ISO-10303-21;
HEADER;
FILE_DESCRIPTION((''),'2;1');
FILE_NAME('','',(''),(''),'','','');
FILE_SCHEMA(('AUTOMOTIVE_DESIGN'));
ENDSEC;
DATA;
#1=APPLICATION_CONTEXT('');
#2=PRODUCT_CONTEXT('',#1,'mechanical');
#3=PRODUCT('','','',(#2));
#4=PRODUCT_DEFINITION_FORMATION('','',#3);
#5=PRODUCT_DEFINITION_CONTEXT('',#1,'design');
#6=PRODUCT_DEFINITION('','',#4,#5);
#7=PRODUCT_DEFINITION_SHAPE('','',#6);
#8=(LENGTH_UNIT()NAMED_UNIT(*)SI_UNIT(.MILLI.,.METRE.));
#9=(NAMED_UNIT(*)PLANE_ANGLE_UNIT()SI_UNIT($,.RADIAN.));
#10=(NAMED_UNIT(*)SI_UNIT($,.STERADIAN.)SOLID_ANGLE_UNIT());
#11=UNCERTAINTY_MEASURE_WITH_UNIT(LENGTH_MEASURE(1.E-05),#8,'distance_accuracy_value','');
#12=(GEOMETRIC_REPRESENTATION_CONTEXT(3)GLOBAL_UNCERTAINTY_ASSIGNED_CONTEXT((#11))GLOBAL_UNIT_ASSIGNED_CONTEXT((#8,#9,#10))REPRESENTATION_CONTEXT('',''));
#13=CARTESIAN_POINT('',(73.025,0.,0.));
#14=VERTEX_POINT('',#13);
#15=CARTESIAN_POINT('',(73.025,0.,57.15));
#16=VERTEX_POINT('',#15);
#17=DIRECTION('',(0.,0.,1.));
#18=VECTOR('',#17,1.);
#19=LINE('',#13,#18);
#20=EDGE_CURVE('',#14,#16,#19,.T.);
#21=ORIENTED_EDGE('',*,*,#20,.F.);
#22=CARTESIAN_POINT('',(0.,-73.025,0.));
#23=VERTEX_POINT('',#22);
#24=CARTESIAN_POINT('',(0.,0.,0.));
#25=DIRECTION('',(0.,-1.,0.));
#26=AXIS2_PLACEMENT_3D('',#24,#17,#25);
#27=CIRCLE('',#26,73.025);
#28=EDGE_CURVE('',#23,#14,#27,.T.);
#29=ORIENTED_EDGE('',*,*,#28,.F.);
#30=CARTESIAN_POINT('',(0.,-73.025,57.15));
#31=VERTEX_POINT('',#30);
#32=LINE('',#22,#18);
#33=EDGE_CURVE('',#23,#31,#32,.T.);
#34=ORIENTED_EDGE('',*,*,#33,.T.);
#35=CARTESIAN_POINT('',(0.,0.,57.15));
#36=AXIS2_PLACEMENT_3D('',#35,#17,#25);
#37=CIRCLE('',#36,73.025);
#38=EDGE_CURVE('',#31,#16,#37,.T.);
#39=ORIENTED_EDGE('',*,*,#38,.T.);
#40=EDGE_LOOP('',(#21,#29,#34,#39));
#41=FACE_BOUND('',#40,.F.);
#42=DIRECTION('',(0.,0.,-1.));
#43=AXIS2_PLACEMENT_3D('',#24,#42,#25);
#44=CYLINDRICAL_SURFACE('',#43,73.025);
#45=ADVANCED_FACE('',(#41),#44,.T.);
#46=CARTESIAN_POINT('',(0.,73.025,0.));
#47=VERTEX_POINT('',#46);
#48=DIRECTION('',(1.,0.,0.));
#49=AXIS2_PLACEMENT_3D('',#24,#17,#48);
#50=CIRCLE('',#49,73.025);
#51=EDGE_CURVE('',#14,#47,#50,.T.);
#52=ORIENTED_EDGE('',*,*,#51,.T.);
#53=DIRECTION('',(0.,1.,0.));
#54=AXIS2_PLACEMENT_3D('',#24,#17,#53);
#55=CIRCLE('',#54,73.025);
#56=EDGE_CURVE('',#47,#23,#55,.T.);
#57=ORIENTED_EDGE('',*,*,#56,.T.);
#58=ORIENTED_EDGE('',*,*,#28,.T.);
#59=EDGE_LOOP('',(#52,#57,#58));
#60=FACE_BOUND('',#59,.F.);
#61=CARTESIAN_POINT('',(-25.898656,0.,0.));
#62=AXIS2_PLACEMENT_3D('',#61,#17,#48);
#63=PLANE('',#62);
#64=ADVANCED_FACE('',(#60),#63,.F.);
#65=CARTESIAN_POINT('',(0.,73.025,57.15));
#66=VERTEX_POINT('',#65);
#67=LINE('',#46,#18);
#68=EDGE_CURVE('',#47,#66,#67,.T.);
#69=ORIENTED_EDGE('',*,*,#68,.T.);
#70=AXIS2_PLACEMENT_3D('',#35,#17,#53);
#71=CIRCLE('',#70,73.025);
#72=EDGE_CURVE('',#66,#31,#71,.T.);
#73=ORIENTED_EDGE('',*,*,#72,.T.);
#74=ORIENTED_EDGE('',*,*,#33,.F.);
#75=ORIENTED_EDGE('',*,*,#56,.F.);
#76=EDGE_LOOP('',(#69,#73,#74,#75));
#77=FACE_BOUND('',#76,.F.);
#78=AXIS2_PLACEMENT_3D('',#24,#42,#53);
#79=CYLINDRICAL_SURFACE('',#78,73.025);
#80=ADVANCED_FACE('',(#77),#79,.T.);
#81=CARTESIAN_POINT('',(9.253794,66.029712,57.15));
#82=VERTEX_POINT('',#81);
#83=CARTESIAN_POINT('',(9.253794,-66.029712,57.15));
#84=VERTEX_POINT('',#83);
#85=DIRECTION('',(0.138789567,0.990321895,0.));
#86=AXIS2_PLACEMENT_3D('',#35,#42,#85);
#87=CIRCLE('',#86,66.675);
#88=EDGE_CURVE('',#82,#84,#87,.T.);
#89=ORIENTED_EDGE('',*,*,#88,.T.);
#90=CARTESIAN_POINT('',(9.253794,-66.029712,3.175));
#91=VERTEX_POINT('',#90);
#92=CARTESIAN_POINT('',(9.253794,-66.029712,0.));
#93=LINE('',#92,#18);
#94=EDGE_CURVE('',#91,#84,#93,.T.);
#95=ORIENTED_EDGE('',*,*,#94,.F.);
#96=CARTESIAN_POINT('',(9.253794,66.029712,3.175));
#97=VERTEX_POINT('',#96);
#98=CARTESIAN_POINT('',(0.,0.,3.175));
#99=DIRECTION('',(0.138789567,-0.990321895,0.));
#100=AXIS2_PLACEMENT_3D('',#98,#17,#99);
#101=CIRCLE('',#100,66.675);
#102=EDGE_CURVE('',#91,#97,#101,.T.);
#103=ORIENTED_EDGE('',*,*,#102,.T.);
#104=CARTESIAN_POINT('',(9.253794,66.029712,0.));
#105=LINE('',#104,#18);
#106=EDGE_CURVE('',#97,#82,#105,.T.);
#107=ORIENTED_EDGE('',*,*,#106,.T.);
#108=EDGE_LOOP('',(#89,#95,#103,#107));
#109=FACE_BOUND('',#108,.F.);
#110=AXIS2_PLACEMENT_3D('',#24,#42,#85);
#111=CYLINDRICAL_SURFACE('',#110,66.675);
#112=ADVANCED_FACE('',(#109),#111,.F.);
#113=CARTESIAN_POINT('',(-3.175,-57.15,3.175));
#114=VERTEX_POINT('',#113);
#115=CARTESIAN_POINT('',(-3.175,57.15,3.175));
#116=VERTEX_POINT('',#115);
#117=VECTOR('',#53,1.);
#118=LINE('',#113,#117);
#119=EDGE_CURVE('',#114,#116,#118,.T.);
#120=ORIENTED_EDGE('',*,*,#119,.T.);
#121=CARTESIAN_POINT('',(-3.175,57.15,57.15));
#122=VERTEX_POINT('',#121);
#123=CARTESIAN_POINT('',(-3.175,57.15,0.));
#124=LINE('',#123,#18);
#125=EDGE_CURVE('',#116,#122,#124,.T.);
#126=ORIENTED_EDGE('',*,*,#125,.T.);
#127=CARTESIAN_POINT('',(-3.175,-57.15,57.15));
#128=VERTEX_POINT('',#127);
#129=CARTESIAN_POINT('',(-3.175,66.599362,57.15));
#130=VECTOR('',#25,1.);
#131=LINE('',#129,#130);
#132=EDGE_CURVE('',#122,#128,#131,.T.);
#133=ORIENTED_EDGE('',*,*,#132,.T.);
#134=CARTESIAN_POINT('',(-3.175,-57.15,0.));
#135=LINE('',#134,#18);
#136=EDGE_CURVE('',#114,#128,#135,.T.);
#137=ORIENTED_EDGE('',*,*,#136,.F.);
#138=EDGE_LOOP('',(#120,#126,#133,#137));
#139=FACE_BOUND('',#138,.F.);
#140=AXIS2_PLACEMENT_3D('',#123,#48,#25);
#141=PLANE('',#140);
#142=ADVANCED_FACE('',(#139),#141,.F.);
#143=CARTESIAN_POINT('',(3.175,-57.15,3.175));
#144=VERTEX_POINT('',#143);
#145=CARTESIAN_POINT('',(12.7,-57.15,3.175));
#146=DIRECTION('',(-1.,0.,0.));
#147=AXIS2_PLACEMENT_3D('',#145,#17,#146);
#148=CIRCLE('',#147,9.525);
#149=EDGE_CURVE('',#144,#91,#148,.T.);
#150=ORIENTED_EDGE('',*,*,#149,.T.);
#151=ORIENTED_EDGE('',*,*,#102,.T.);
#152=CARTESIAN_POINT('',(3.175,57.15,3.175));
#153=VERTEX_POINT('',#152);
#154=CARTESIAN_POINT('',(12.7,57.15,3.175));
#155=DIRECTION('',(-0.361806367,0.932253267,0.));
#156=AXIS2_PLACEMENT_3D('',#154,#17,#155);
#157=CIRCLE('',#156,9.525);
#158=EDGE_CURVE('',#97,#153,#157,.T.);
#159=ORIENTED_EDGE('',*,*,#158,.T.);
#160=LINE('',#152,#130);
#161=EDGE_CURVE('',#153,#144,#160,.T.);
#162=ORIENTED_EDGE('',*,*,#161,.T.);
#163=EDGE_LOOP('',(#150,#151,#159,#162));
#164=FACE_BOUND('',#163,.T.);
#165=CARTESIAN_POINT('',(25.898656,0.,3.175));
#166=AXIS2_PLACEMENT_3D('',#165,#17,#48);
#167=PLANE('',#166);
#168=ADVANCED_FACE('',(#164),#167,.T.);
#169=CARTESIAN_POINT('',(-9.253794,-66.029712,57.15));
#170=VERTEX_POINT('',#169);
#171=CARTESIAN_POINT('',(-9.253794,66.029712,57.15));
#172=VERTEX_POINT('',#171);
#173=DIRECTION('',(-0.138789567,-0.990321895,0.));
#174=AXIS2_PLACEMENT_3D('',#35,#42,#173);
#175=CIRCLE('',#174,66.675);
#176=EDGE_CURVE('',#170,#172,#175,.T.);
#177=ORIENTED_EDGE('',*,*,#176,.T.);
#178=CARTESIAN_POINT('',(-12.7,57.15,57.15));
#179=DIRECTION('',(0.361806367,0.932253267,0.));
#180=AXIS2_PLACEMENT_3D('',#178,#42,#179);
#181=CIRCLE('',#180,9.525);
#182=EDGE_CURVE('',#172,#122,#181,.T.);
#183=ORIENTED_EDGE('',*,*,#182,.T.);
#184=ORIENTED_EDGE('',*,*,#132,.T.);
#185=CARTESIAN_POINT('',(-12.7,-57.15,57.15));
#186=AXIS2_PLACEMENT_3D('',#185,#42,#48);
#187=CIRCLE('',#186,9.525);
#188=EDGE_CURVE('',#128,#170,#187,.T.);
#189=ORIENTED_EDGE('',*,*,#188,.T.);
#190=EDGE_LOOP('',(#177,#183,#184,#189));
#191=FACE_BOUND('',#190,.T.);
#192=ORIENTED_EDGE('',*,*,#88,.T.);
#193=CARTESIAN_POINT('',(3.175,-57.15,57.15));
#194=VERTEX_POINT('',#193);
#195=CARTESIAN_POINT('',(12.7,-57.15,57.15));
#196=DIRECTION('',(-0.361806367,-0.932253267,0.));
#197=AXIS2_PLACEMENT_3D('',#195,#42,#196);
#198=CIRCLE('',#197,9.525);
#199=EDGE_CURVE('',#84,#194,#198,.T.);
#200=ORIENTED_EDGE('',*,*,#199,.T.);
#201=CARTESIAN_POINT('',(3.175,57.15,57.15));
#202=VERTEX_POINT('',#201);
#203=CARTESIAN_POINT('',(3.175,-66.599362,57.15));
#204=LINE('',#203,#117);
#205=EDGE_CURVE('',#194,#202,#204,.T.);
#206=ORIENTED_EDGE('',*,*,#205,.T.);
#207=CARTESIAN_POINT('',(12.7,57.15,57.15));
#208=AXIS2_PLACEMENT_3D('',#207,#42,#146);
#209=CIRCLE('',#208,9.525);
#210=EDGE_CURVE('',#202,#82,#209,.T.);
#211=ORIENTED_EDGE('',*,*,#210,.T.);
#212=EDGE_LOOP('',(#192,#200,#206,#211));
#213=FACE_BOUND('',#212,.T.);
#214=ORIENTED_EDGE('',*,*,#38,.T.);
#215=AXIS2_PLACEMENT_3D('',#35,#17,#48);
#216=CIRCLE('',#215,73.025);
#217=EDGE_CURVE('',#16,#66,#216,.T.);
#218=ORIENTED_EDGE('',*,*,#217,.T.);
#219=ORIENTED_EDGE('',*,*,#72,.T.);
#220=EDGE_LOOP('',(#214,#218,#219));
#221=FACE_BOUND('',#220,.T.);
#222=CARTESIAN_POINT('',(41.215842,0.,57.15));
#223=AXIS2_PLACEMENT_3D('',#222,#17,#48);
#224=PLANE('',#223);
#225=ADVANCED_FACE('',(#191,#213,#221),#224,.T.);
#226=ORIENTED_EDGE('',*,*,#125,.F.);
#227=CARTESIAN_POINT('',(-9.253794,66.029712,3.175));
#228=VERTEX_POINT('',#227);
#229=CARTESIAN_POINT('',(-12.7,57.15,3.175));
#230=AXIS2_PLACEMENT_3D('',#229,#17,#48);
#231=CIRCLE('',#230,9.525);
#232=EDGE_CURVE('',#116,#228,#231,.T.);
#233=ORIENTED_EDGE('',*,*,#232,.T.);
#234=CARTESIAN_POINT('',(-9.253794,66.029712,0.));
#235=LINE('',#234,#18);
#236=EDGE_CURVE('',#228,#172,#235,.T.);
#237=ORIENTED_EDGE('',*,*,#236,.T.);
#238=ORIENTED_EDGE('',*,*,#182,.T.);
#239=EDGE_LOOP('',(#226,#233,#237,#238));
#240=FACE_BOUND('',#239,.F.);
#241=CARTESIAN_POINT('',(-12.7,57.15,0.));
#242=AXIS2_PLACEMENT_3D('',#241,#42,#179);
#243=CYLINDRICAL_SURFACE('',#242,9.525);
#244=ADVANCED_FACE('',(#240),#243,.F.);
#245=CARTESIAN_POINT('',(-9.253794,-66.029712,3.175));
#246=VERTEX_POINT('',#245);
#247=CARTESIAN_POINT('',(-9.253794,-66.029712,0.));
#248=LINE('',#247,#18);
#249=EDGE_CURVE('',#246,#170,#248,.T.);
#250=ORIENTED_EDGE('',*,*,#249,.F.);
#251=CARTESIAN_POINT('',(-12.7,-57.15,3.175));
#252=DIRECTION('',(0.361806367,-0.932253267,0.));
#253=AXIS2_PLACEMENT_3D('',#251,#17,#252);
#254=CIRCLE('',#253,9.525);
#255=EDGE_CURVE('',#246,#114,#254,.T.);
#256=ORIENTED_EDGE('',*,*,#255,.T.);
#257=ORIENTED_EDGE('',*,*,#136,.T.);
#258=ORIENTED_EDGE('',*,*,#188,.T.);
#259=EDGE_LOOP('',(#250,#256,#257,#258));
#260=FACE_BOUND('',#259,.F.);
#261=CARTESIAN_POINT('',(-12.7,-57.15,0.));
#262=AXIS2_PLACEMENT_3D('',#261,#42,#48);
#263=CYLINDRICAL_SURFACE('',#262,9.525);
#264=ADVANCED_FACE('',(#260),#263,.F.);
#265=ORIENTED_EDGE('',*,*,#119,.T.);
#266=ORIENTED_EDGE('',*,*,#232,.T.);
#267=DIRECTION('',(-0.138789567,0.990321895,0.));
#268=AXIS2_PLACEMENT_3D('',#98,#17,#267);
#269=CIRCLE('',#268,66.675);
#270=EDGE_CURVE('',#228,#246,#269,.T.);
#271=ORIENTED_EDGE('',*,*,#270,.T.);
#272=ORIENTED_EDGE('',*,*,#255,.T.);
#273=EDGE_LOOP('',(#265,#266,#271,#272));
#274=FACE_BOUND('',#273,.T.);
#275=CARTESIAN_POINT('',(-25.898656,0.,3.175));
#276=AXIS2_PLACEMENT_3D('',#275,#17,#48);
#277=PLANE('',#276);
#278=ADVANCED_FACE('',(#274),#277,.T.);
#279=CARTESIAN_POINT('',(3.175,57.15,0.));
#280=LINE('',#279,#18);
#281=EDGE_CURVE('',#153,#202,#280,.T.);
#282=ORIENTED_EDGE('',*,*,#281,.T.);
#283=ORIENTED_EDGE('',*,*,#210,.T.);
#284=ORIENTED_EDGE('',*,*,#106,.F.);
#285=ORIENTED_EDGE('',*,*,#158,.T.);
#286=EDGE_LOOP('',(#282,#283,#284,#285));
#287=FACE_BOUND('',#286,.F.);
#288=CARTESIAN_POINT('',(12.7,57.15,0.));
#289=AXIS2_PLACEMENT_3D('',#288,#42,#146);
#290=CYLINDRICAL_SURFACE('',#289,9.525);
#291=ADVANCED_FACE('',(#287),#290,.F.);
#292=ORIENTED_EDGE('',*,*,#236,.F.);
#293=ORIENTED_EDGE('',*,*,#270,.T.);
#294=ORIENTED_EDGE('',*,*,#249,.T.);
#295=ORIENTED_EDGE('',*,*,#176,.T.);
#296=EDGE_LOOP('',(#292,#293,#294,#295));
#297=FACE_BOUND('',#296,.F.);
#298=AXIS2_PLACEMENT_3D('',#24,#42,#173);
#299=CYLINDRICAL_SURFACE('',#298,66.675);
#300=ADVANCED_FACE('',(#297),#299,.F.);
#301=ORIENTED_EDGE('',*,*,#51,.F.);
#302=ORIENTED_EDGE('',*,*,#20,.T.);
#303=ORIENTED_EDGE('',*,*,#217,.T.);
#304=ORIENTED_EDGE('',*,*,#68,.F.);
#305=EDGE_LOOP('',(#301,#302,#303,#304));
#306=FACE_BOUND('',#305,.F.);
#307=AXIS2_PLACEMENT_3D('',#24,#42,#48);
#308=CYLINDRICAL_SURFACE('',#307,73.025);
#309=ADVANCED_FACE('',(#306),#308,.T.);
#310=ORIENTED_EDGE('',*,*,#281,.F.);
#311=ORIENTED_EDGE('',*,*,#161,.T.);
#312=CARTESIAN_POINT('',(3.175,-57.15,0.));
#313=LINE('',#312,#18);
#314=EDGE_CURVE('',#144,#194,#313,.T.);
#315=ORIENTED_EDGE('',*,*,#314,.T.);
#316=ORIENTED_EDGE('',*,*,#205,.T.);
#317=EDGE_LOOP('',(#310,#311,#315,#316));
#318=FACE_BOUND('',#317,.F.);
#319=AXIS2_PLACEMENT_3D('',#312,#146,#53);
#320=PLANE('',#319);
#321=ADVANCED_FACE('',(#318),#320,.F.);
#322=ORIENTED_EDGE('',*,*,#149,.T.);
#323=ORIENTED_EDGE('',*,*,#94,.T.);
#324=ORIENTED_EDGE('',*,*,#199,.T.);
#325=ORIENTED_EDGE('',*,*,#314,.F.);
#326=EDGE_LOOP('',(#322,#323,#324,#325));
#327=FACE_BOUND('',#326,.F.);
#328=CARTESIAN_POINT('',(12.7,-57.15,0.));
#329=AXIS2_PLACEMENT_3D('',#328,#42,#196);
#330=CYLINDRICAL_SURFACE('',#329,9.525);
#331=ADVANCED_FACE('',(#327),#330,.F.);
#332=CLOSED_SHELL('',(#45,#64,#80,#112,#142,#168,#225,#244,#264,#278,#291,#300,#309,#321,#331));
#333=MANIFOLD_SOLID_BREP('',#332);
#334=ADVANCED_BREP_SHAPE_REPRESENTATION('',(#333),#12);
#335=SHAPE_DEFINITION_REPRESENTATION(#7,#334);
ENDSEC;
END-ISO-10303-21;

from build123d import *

# Parameters (mm, degrees)
F1_DEPTH = 57.15
F2_DEPTH = 3.175


# Not quite as in the source:
# - a feature names something its author has since deleted; it is built from what else it names


with BuildPart() as f1:
    # F0 (on Top) → F1 (new body)
    with BuildSketch(Plane.XY):
        with BuildLine():
            ThreePointArc((0, -73.025), (51.6364726961, -51.6364726961), (73.025, 0))
            ThreePointArc((73.025, 0), (51.6364726961, 51.6364726961), (0, 73.025))
            Line((0, 73.025), (0, 66.675))
            ThreePointArc((0, 66.675), (1.5879504187, 66.6560877825), (3.175, 66.5993618588))
            ThreePointArc((3.175, 66.5993618588), (6.220920948, 66.3841529852), (9.2537943589, 66.0297123647))
            ThreePointArc((9.2537943589, 66.0297123647), (50.3117896913, 43.752479279), (66.675, 0))
            ThreePointArc((66.675, 0), (50.3117896913, -43.752479279), (9.2537943589, -66.0297123647))
            ThreePointArc((9.2537943589, -66.0297123647), (6.220920948, -66.3841529852), (3.175, -66.5993618588))
            ThreePointArc((3.175, -66.5993618588), (1.5879504187, -66.6560877825), (0, -66.675))
            Line((0, -66.675), (0, -73.025))
        make_face()
        with BuildLine():
            Line((0, 66.675), (0, 73.025))
            ThreePointArc((0, 73.025), (-73.025, 0), (0, -73.025))
            Line((0, -73.025), (0, -66.675))
            ThreePointArc((0, -66.675), (-1.5879504187, -66.6560877825), (-3.175, -66.5993618588))
            ThreePointArc((-3.175, -66.5993618588), (-6.220920948, -66.3841529852), (-9.2537943589, -66.0297123647))
            ThreePointArc((-9.2537943589, -66.0297123647), (-66.675, 0), (-9.2537943589, 66.0297123647))
            ThreePointArc((-9.2537943589, 66.0297123647), (-6.220920948, 66.3841529852), (-3.175, 66.5993618588))
            ThreePointArc((-3.175, 66.5993618588), (-1.5879504187, 66.6560877825), (0, 66.675))
        make_face()
        with BuildLine():
            Line((-3.175, 57.15), (-3.175, 66.5993618588))
            ThreePointArc((-3.175, 66.5993618588), (-6.220920948, 66.3841529852), (-9.2537943589, 66.0297123647))
            ThreePointArc((-9.2537943589, 66.0297123647), (-4.840269288, 62.5305444087), (-3.175, 57.15))
        make_face()
        with BuildLine():
            ThreePointArc((9.2537943589, 66.0297123647), (6.220920948, 66.3841529852), (3.175, 66.5993618588))
            Line((3.175, 66.5993618588), (3.175, 57.15))
            ThreePointArc((3.175, 57.15), (4.840269288, 62.5305444087), (9.2537943589, 66.0297123647))
        make_face()
        with BuildLine():
            Line((3.175, -57.15), (3.175, -66.5993618588))
            ThreePointArc((3.175, -66.5993618588), (6.220920948, -66.3841529852), (9.2537943589, -66.0297123647))
            ThreePointArc((9.2537943589, -66.0297123647), (4.840269288, -62.5305444087), (3.175, -57.15))
        make_face()
        with BuildLine():
            ThreePointArc((-9.2537943589, -66.0297123647), (-6.220920948, -66.3841529852), (-3.175, -66.5993618588))
            Line((-3.175, -66.5993618588), (-3.175, -57.15))
            ThreePointArc((-3.175, -57.15), (-4.840269288, -62.5305444087), (-9.2537943589, -66.0297123647))
        make_face()
        with BuildLine():
            Line((0, -66.675), (0, 66.675))
            ThreePointArc((0, 66.675), (-1.5879504187, 66.6560877825), (-3.175, 66.5993618588))
            Line((-3.175, 66.5993618588), (-3.175, 57.15))
            Line((-3.175, 57.15), (-3.175, -57.15))
            Line((-3.175, -57.15), (-3.175, -66.5993618588))
            ThreePointArc((-3.175, -66.5993618588), (-1.5879504187, -66.6560877825), (0, -66.675))
        make_face()
        with BuildLine():
            ThreePointArc((3.175, 66.5993618588), (1.5879504187, 66.6560877825), (0, 66.675))
            Line((0, 66.675), (0, -66.675))
            ThreePointArc((0, -66.675), (1.5879504187, -66.6560877825), (3.175, -66.5993618588))
            Line((3.175, -66.5993618588), (3.175, -57.15))
            Line((3.175, -57.15), (3.175, 57.15))
            Line((3.175, 57.15), (3.175, 66.5993618588))
        make_face()
    extrude(amount=F1_DEPTH)

    # F0 (on Top) → F2 (join)
    with BuildSketch(Plane.XY):
        with BuildLine():
            ThreePointArc((-3.175, 57.15), (-4.840269288, 62.5305444087), (-9.2537943589, 66.0297123647))
            ThreePointArc((-9.2537943589, 66.0297123647), (-66.675, 0), (-9.2537943589, -66.0297123647))
            ThreePointArc((-9.2537943589, -66.0297123647), (-4.840269288, -62.5305444087), (-3.175, -57.15))
            Line((-3.175, -57.15), (-3.175, 57.15))
        make_face()
        with BuildLine():
            ThreePointArc((66.675, 0), (50.3117896913, 43.752479279), (9.2537943589, 66.0297123647))
            ThreePointArc((9.2537943589, 66.0297123647), (4.840269288, 62.5305444087), (3.175, 57.15))
            Line((3.175, 57.15), (3.175, -57.15))
            ThreePointArc((3.175, -57.15), (4.840269288, -62.5305444087), (9.2537943589, -66.0297123647))
            ThreePointArc((9.2537943589, -66.0297123647), (50.3117896913, -43.752479279), (66.675, 0))
        make_face()
    extrude(amount=F2_DEPTH)


solid = f1.part
